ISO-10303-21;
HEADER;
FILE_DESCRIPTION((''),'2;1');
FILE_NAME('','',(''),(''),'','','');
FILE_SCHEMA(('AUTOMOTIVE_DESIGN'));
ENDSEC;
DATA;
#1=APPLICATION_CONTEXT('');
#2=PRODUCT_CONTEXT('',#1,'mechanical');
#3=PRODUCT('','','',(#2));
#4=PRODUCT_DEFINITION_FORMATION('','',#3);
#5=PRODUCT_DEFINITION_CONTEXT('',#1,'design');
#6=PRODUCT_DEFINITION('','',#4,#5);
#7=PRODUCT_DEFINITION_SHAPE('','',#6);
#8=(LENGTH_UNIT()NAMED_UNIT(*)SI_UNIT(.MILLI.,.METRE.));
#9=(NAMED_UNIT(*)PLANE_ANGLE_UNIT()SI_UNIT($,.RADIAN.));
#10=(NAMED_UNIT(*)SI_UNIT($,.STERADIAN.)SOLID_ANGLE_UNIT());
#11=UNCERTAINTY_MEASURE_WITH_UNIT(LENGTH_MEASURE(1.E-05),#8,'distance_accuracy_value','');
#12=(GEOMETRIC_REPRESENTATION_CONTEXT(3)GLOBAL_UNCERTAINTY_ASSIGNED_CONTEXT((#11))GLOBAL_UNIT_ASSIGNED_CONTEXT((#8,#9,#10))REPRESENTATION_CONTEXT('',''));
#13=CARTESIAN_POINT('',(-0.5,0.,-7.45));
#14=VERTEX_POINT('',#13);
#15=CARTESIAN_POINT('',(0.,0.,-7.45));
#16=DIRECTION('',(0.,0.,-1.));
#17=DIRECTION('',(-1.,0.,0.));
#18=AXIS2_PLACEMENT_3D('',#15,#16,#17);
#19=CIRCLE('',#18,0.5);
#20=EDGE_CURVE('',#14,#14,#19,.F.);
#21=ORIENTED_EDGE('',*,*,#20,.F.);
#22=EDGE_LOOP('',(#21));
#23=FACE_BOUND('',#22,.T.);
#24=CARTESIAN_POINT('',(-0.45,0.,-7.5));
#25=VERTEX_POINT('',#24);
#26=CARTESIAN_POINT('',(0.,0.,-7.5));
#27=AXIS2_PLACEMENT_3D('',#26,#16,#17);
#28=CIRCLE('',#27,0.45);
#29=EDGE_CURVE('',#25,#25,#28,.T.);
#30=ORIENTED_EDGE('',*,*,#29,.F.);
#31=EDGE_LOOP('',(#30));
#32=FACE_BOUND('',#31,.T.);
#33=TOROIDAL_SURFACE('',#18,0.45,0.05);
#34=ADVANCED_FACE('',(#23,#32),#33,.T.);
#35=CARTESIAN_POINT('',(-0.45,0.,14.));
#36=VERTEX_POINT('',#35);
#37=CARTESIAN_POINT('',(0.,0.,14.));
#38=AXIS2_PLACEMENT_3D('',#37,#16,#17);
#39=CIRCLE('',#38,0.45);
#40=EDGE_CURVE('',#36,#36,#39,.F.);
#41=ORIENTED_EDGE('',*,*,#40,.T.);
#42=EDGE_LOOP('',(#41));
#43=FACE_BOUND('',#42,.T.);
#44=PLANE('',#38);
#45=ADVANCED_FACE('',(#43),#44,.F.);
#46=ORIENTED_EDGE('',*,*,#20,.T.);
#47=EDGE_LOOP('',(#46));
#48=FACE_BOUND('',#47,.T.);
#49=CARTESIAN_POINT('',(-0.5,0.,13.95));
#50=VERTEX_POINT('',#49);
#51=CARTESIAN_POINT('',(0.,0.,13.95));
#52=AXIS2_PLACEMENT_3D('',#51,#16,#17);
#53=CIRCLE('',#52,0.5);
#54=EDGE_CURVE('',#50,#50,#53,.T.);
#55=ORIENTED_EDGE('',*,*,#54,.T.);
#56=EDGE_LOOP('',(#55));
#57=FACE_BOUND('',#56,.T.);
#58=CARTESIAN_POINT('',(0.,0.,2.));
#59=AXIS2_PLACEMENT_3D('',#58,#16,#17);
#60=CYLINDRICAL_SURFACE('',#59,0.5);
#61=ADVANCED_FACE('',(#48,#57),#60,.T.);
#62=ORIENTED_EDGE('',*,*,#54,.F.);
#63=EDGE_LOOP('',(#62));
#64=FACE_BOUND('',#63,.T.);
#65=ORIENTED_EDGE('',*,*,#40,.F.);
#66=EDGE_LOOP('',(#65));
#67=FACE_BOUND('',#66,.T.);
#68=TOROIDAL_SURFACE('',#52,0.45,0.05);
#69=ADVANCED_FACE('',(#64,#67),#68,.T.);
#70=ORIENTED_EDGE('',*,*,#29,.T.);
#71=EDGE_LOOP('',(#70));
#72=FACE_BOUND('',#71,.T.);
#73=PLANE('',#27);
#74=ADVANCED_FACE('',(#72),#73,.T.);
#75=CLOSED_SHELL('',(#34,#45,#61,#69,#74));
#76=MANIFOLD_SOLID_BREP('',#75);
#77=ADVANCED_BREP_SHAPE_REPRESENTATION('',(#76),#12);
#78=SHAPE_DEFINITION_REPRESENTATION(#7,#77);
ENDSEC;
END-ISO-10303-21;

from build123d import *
from build123d.topology import SkipClean

# Parameters (mm, degrees)
SKETCH1_R                = 0.5
BOSS_EXTRUDE1_DEPTH      = 2
SKETCH2_R                = 0.75
BOSS_EXTRUDE2_DEPTH      = 8
BOSS_EXTRUDE3_START      = 8
SKETCH3_R                = 0.75
BOSS_EXTRUDE3_DEPTH      = 8
BOSS_EXTRUDE4_DEPTH      = 2
BOSS_EXTRUDE4_DEPTH_BACK = 24
SKETCH4_R                = 0.5
SKETCH5_R                = 1.083179326
SKETCH5_R_2              = 0.5
CUT_EXTRUDE1_DEPTH       = 20
SKETCH6_R                = 0.993083776
CUT_EXTRUDE2_DEPTH       = 4.5
FILLET1_R                = 0.05


with BuildPart() as part:
    # Sketch1 → Boss-Extrude1 (new, symmetric)
    with BuildSketch(Plane.XY):
        Circle(SKETCH1_R)
    extrude(amount=BOSS_EXTRUDE1_DEPTH, both=True)

    # Sketch2 → Boss-Extrude2 (add)
    with BuildSketch(Plane.XY.offset(2)):
        Circle(SKETCH2_R)
    extrude(amount=BOSS_EXTRUDE2_DEPTH)

    # Sketch3 → Boss-Extrude3 (add)
    with BuildSketch(Plane(origin=(0, 0, -2), x_dir=(-1, 0, 0), z_dir=(0, 0, -1)).offset(BOSS_EXTRUDE3_START)):
        Circle(SKETCH3_R)
    extrude(amount=-BOSS_EXTRUDE3_DEPTH)

    # Sketch4 → Boss-Extrude4 (add, two sides: drawn at the far end of the back side and taken through both)
    with BuildSketch(Plane(origin=(0, 0, -10), x_dir=(-1, 0, 0), z_dir=(0, 0, -1)).offset(-BOSS_EXTRUDE4_DEPTH_BACK)):
        Circle(SKETCH4_R)
    extrude(amount=BOSS_EXTRUDE4_DEPTH + BOSS_EXTRUDE4_DEPTH_BACK)

    # Sketch5 → Cut-Extrude1 (cut, symmetric)
    with SkipClean():  # the faces are left unmerged after this step: merging them gives an invalid solid
        with BuildSketch(Plane(origin=(0, 0, 2), x_dir=(-1, 0, 0), z_dir=(0, 0, -1))):
            Circle(SKETCH5_R)
            Circle(SKETCH5_R_2, mode=Mode.SUBTRACT)
        extrude(amount=CUT_EXTRUDE1_DEPTH, both=True, mode=Mode.SUBTRACT)
    add(part.part.scale(1), mode=Mode.REPLACE)  # the faces are merged on a copy

    # Sketch6 → Cut-Extrude2 (cut)
    with BuildSketch(Plane(origin=(0, 0, -12), x_dir=(-1, 0, 0), z_dir=(0, 0, -1))):
        Circle(SKETCH6_R)
    extrude(amount=-CUT_EXTRUDE2_DEPTH, mode=Mode.SUBTRACT)

    # Fillet1
    fillet1_edges = [part.edges().sort_by_distance(p)[0] for p in [
        (0.5, 0, 14),
        (0.5, 0, -7.5),
    ]]
    fillet(fillet1_edges, radius=FILLET1_R)


solid = part.part
